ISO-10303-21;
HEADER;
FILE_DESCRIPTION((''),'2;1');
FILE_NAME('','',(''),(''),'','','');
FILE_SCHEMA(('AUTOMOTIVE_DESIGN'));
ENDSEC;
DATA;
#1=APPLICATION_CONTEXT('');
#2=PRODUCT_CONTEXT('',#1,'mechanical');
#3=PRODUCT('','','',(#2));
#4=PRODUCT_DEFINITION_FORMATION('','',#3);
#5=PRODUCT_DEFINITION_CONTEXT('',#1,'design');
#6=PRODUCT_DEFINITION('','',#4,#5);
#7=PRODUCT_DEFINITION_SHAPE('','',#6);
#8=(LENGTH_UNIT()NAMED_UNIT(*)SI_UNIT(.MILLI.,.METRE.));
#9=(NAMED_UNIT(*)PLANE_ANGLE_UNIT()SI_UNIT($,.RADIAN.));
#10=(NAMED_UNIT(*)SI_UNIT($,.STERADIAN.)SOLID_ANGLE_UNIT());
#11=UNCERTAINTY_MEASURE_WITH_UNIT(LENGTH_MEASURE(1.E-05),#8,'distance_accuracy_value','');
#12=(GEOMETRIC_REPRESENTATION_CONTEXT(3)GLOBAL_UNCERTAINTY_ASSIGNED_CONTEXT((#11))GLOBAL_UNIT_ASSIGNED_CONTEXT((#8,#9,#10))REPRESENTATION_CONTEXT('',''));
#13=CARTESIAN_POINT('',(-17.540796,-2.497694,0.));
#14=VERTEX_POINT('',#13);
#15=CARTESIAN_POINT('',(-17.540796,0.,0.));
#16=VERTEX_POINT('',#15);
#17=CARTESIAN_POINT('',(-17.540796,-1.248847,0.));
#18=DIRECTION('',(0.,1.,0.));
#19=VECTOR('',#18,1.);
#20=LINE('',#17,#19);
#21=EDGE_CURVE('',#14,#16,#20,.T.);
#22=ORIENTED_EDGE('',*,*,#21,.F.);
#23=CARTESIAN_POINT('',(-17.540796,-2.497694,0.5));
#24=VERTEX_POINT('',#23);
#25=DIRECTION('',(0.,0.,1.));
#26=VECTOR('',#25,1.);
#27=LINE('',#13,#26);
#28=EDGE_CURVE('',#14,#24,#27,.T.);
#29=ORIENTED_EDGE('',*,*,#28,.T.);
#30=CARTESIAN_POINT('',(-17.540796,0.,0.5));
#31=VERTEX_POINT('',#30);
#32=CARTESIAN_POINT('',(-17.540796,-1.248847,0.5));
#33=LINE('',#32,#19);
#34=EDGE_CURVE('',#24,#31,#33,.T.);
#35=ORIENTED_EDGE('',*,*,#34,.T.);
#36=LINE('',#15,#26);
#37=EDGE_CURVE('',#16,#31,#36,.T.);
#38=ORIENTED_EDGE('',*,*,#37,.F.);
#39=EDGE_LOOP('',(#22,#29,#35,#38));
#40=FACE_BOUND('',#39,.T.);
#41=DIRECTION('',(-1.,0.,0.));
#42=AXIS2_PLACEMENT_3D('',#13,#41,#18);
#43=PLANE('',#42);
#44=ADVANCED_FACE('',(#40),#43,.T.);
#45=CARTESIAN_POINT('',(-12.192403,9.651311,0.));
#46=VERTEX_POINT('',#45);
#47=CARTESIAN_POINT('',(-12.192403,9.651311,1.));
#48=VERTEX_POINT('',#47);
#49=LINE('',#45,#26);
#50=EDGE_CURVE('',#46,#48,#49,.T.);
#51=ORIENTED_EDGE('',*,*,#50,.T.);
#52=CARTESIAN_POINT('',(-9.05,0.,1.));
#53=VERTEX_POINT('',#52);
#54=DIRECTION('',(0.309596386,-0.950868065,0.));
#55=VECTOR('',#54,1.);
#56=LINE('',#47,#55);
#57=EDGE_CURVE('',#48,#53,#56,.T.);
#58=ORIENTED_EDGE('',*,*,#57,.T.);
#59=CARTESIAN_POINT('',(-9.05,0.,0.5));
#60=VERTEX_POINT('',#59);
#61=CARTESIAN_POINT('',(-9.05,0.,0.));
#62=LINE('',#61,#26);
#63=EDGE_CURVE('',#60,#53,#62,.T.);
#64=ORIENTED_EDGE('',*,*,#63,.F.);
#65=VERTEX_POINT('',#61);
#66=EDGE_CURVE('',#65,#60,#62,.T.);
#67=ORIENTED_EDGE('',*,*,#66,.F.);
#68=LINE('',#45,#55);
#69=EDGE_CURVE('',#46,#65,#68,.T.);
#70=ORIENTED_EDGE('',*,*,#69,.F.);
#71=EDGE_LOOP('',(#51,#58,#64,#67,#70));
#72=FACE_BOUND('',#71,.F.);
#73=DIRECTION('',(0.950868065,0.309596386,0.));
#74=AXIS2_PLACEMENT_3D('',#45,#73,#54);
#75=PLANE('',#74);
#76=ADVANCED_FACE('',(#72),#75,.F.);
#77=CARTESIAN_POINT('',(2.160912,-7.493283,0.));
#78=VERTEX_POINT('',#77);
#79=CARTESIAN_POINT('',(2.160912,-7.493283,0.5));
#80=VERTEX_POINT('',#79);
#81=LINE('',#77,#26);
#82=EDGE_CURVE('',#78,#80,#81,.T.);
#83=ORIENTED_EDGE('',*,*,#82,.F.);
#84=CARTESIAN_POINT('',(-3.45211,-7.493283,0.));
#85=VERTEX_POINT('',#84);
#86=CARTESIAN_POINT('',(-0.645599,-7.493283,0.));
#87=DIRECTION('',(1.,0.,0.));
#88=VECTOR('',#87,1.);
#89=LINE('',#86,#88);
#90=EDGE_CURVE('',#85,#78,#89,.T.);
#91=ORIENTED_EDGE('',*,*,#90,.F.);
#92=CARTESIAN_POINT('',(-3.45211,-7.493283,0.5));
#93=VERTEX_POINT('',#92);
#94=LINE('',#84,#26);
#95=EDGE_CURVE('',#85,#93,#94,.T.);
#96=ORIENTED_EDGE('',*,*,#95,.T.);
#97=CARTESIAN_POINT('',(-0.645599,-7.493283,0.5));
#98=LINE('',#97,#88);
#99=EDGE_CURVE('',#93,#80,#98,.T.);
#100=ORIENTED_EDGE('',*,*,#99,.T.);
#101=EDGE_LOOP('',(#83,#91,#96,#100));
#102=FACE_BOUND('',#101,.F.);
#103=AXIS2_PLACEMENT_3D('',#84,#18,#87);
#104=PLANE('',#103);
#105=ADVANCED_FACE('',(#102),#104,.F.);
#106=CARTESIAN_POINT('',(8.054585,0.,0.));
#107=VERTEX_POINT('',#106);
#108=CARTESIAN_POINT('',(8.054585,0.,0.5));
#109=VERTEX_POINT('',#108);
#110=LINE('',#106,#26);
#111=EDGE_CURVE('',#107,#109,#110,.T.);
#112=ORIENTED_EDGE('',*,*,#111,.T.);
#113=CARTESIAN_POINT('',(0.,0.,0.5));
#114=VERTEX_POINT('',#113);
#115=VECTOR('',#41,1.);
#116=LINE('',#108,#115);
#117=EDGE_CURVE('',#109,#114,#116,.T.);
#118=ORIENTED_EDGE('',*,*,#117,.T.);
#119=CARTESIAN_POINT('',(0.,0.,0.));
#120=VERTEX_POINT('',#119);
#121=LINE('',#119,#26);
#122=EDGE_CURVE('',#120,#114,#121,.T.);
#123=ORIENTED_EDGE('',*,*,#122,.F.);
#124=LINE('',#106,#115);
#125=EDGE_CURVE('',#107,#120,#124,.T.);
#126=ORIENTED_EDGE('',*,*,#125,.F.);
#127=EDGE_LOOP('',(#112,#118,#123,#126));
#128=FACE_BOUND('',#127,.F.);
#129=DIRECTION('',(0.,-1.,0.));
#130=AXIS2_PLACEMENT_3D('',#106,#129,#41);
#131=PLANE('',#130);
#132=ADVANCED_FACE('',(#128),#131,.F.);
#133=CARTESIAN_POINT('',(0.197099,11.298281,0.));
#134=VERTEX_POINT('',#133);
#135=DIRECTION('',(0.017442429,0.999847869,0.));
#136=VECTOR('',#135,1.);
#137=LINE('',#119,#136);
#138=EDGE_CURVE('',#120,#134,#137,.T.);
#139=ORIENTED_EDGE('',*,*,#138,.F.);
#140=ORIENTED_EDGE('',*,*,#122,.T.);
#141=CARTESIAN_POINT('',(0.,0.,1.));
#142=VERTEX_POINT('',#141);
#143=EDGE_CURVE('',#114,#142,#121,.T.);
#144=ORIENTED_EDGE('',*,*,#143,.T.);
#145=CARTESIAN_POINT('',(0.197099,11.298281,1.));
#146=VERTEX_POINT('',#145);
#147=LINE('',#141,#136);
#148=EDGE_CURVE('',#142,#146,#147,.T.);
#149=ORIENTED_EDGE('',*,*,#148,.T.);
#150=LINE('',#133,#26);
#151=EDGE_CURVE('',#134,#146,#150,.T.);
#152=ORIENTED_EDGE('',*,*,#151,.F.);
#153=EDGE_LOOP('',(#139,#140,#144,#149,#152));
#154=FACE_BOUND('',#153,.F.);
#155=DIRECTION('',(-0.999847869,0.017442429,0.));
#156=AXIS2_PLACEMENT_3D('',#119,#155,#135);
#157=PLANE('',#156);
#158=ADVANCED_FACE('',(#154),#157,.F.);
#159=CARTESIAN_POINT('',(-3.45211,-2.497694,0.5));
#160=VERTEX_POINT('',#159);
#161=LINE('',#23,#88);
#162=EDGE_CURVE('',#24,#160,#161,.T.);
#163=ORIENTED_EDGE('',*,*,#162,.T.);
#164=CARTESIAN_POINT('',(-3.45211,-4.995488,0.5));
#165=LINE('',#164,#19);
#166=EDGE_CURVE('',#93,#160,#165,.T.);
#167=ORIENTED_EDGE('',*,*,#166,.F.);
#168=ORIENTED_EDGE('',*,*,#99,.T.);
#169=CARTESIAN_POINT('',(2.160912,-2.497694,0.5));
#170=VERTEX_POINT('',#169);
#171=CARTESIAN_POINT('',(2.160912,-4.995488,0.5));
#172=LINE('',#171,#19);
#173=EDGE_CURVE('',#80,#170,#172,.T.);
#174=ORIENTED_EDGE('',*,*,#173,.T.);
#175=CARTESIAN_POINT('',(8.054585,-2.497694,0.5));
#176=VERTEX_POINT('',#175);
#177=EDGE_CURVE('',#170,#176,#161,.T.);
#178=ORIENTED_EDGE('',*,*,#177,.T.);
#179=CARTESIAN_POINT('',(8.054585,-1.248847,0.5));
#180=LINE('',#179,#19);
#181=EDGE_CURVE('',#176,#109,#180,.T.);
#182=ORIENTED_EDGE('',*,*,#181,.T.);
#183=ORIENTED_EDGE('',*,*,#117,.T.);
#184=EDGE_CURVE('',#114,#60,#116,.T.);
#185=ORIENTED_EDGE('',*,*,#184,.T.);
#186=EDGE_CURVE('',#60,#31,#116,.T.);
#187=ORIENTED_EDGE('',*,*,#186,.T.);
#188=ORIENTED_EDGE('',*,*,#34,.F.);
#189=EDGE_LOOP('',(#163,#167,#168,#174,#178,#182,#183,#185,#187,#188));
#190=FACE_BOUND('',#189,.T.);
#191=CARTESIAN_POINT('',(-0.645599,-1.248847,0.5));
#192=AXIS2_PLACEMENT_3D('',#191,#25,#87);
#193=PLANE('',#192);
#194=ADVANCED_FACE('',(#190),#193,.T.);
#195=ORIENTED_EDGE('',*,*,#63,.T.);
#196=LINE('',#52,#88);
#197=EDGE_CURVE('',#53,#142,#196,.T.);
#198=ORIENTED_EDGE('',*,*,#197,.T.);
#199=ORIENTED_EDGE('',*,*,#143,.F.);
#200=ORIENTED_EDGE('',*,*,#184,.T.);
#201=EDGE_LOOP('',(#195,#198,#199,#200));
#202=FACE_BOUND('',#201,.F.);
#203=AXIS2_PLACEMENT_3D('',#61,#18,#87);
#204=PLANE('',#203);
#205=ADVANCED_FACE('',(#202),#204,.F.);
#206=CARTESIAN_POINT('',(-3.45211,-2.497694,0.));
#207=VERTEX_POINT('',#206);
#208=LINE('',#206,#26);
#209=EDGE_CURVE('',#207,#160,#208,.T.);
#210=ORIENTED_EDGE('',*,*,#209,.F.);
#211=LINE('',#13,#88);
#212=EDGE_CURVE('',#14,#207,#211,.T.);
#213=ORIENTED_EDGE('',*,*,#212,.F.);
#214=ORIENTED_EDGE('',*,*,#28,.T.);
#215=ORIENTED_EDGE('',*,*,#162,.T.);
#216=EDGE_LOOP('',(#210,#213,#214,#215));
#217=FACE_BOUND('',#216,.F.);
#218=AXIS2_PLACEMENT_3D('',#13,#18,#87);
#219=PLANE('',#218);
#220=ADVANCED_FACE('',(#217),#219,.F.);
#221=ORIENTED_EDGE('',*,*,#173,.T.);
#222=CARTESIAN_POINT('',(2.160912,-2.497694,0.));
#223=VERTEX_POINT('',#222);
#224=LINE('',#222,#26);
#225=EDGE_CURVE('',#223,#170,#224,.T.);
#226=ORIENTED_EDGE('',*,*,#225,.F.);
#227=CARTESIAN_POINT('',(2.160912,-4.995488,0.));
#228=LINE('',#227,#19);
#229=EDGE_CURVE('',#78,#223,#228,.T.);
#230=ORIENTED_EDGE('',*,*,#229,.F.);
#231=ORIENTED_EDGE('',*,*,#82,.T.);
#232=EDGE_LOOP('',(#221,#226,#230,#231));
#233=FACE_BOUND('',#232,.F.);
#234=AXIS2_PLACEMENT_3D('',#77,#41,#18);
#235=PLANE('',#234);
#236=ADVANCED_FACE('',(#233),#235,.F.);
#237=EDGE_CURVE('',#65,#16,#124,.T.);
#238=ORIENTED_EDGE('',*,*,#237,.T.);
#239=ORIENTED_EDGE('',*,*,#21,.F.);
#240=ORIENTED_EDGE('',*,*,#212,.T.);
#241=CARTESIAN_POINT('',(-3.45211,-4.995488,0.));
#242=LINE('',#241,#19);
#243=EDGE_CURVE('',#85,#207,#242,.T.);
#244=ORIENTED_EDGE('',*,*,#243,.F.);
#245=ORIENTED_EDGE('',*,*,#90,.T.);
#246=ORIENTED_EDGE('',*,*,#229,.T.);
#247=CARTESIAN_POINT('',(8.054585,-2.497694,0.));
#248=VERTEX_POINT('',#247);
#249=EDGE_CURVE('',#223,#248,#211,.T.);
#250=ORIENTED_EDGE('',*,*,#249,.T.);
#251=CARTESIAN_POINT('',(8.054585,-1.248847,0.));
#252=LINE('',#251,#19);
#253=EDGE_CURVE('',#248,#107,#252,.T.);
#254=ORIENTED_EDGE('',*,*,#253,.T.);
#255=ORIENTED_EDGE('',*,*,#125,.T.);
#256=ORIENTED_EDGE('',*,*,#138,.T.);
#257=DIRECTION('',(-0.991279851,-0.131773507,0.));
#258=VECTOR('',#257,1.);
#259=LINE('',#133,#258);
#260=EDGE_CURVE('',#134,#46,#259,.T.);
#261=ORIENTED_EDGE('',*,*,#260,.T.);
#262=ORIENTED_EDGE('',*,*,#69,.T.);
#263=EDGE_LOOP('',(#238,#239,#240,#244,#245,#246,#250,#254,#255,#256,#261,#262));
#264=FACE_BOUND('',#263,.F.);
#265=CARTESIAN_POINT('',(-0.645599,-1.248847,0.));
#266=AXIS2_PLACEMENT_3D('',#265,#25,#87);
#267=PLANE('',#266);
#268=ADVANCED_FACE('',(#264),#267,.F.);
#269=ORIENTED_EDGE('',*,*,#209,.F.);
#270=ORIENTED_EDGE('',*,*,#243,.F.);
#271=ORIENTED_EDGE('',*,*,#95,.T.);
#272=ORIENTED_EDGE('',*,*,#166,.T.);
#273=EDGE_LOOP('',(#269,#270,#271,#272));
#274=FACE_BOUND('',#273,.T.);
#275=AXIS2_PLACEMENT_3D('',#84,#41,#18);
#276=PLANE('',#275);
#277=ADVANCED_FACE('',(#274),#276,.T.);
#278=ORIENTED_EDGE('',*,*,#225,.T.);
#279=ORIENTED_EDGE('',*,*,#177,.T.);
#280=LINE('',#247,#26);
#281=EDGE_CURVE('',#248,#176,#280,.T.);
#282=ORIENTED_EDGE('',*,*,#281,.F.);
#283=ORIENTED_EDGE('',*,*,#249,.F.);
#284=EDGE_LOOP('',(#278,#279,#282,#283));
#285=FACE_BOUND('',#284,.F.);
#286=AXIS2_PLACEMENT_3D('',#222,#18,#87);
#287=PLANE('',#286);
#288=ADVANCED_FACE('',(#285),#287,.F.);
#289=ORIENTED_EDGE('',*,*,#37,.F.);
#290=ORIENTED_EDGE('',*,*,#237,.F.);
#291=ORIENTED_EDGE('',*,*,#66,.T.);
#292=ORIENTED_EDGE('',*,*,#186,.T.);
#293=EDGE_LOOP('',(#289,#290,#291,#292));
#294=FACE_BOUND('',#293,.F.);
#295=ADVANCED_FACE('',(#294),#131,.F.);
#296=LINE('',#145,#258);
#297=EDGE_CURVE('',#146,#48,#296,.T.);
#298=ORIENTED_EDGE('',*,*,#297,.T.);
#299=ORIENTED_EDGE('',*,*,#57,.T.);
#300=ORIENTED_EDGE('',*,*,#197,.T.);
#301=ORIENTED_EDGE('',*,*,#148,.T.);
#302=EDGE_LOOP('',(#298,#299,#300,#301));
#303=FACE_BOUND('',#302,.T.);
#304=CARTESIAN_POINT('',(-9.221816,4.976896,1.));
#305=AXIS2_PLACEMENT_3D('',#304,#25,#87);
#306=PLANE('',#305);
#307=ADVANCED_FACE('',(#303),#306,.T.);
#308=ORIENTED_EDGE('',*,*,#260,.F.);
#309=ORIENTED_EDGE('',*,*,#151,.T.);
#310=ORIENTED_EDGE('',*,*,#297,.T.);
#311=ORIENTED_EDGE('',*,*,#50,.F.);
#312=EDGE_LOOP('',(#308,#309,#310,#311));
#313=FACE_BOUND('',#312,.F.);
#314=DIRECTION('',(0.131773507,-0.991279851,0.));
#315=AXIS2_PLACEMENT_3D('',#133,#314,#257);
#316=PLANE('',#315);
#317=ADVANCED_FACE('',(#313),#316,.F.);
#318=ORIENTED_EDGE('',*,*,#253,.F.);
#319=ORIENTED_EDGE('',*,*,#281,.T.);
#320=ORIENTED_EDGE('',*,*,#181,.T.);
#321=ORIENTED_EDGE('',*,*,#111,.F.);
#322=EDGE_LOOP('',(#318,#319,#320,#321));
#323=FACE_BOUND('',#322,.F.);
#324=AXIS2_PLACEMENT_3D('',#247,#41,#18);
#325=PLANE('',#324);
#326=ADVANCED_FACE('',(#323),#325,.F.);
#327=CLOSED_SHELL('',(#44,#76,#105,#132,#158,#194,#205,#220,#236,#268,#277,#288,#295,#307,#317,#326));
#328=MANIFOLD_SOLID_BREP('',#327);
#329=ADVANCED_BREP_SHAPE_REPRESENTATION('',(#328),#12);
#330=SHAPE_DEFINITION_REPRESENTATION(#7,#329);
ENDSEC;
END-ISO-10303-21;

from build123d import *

# Parameters (mm, degrees)
F1_DEPTH = 1
F2_W     = 5.6130217854
F2_H     = 2.4976935238
F2_W_2   = 14.08868609
F2_W_3   = 5.8936730493
F2_H_2   = 4.9955896102
F3_DEPTH = 0.5


with BuildPart() as f1:
    # F0 (on Top) → F1 (new body)
    with BuildSketch(Plane.XY):
        Polygon((-12.1924033149, 9.6513108647), (-9.05, 0), (-5.4919267763, 4.3473211306), align=None)
        Polygon((-5.4919267763, 4.3473211306), (0, 0), (0.1970994475, 11.2982809227), align=None)
        Polygon((-12.1924033149, 9.6513108647), (-5.4919267763, 4.3473211306), (0.1970994475, 11.2982809227), align=None)
        Polygon((-9.05, 0), (0, 0), (-5.4919267763, 4.3473211306), align=None)
    extrude(amount=F1_DEPTH)

    # F2 (on Top) → F3 (join)
    with BuildSketch(Plane.XY):
        with Locations((-0.6455987459, -1.2488467619)):
            Rectangle(F2_W, F2_H)
        with Locations((-10.4964526836, -1.2488467619)):
            Rectangle(F2_W_2, F2_H)
        with Locations((5.1077486714, -1.2488467619)):
            Rectangle(F2_W_3, F2_H)
        with Locations((-0.6455987459, -4.9954883289)):
            Rectangle(F2_W, F2_H_2)
    extrude(amount=F3_DEPTH)


solid = f1.part
